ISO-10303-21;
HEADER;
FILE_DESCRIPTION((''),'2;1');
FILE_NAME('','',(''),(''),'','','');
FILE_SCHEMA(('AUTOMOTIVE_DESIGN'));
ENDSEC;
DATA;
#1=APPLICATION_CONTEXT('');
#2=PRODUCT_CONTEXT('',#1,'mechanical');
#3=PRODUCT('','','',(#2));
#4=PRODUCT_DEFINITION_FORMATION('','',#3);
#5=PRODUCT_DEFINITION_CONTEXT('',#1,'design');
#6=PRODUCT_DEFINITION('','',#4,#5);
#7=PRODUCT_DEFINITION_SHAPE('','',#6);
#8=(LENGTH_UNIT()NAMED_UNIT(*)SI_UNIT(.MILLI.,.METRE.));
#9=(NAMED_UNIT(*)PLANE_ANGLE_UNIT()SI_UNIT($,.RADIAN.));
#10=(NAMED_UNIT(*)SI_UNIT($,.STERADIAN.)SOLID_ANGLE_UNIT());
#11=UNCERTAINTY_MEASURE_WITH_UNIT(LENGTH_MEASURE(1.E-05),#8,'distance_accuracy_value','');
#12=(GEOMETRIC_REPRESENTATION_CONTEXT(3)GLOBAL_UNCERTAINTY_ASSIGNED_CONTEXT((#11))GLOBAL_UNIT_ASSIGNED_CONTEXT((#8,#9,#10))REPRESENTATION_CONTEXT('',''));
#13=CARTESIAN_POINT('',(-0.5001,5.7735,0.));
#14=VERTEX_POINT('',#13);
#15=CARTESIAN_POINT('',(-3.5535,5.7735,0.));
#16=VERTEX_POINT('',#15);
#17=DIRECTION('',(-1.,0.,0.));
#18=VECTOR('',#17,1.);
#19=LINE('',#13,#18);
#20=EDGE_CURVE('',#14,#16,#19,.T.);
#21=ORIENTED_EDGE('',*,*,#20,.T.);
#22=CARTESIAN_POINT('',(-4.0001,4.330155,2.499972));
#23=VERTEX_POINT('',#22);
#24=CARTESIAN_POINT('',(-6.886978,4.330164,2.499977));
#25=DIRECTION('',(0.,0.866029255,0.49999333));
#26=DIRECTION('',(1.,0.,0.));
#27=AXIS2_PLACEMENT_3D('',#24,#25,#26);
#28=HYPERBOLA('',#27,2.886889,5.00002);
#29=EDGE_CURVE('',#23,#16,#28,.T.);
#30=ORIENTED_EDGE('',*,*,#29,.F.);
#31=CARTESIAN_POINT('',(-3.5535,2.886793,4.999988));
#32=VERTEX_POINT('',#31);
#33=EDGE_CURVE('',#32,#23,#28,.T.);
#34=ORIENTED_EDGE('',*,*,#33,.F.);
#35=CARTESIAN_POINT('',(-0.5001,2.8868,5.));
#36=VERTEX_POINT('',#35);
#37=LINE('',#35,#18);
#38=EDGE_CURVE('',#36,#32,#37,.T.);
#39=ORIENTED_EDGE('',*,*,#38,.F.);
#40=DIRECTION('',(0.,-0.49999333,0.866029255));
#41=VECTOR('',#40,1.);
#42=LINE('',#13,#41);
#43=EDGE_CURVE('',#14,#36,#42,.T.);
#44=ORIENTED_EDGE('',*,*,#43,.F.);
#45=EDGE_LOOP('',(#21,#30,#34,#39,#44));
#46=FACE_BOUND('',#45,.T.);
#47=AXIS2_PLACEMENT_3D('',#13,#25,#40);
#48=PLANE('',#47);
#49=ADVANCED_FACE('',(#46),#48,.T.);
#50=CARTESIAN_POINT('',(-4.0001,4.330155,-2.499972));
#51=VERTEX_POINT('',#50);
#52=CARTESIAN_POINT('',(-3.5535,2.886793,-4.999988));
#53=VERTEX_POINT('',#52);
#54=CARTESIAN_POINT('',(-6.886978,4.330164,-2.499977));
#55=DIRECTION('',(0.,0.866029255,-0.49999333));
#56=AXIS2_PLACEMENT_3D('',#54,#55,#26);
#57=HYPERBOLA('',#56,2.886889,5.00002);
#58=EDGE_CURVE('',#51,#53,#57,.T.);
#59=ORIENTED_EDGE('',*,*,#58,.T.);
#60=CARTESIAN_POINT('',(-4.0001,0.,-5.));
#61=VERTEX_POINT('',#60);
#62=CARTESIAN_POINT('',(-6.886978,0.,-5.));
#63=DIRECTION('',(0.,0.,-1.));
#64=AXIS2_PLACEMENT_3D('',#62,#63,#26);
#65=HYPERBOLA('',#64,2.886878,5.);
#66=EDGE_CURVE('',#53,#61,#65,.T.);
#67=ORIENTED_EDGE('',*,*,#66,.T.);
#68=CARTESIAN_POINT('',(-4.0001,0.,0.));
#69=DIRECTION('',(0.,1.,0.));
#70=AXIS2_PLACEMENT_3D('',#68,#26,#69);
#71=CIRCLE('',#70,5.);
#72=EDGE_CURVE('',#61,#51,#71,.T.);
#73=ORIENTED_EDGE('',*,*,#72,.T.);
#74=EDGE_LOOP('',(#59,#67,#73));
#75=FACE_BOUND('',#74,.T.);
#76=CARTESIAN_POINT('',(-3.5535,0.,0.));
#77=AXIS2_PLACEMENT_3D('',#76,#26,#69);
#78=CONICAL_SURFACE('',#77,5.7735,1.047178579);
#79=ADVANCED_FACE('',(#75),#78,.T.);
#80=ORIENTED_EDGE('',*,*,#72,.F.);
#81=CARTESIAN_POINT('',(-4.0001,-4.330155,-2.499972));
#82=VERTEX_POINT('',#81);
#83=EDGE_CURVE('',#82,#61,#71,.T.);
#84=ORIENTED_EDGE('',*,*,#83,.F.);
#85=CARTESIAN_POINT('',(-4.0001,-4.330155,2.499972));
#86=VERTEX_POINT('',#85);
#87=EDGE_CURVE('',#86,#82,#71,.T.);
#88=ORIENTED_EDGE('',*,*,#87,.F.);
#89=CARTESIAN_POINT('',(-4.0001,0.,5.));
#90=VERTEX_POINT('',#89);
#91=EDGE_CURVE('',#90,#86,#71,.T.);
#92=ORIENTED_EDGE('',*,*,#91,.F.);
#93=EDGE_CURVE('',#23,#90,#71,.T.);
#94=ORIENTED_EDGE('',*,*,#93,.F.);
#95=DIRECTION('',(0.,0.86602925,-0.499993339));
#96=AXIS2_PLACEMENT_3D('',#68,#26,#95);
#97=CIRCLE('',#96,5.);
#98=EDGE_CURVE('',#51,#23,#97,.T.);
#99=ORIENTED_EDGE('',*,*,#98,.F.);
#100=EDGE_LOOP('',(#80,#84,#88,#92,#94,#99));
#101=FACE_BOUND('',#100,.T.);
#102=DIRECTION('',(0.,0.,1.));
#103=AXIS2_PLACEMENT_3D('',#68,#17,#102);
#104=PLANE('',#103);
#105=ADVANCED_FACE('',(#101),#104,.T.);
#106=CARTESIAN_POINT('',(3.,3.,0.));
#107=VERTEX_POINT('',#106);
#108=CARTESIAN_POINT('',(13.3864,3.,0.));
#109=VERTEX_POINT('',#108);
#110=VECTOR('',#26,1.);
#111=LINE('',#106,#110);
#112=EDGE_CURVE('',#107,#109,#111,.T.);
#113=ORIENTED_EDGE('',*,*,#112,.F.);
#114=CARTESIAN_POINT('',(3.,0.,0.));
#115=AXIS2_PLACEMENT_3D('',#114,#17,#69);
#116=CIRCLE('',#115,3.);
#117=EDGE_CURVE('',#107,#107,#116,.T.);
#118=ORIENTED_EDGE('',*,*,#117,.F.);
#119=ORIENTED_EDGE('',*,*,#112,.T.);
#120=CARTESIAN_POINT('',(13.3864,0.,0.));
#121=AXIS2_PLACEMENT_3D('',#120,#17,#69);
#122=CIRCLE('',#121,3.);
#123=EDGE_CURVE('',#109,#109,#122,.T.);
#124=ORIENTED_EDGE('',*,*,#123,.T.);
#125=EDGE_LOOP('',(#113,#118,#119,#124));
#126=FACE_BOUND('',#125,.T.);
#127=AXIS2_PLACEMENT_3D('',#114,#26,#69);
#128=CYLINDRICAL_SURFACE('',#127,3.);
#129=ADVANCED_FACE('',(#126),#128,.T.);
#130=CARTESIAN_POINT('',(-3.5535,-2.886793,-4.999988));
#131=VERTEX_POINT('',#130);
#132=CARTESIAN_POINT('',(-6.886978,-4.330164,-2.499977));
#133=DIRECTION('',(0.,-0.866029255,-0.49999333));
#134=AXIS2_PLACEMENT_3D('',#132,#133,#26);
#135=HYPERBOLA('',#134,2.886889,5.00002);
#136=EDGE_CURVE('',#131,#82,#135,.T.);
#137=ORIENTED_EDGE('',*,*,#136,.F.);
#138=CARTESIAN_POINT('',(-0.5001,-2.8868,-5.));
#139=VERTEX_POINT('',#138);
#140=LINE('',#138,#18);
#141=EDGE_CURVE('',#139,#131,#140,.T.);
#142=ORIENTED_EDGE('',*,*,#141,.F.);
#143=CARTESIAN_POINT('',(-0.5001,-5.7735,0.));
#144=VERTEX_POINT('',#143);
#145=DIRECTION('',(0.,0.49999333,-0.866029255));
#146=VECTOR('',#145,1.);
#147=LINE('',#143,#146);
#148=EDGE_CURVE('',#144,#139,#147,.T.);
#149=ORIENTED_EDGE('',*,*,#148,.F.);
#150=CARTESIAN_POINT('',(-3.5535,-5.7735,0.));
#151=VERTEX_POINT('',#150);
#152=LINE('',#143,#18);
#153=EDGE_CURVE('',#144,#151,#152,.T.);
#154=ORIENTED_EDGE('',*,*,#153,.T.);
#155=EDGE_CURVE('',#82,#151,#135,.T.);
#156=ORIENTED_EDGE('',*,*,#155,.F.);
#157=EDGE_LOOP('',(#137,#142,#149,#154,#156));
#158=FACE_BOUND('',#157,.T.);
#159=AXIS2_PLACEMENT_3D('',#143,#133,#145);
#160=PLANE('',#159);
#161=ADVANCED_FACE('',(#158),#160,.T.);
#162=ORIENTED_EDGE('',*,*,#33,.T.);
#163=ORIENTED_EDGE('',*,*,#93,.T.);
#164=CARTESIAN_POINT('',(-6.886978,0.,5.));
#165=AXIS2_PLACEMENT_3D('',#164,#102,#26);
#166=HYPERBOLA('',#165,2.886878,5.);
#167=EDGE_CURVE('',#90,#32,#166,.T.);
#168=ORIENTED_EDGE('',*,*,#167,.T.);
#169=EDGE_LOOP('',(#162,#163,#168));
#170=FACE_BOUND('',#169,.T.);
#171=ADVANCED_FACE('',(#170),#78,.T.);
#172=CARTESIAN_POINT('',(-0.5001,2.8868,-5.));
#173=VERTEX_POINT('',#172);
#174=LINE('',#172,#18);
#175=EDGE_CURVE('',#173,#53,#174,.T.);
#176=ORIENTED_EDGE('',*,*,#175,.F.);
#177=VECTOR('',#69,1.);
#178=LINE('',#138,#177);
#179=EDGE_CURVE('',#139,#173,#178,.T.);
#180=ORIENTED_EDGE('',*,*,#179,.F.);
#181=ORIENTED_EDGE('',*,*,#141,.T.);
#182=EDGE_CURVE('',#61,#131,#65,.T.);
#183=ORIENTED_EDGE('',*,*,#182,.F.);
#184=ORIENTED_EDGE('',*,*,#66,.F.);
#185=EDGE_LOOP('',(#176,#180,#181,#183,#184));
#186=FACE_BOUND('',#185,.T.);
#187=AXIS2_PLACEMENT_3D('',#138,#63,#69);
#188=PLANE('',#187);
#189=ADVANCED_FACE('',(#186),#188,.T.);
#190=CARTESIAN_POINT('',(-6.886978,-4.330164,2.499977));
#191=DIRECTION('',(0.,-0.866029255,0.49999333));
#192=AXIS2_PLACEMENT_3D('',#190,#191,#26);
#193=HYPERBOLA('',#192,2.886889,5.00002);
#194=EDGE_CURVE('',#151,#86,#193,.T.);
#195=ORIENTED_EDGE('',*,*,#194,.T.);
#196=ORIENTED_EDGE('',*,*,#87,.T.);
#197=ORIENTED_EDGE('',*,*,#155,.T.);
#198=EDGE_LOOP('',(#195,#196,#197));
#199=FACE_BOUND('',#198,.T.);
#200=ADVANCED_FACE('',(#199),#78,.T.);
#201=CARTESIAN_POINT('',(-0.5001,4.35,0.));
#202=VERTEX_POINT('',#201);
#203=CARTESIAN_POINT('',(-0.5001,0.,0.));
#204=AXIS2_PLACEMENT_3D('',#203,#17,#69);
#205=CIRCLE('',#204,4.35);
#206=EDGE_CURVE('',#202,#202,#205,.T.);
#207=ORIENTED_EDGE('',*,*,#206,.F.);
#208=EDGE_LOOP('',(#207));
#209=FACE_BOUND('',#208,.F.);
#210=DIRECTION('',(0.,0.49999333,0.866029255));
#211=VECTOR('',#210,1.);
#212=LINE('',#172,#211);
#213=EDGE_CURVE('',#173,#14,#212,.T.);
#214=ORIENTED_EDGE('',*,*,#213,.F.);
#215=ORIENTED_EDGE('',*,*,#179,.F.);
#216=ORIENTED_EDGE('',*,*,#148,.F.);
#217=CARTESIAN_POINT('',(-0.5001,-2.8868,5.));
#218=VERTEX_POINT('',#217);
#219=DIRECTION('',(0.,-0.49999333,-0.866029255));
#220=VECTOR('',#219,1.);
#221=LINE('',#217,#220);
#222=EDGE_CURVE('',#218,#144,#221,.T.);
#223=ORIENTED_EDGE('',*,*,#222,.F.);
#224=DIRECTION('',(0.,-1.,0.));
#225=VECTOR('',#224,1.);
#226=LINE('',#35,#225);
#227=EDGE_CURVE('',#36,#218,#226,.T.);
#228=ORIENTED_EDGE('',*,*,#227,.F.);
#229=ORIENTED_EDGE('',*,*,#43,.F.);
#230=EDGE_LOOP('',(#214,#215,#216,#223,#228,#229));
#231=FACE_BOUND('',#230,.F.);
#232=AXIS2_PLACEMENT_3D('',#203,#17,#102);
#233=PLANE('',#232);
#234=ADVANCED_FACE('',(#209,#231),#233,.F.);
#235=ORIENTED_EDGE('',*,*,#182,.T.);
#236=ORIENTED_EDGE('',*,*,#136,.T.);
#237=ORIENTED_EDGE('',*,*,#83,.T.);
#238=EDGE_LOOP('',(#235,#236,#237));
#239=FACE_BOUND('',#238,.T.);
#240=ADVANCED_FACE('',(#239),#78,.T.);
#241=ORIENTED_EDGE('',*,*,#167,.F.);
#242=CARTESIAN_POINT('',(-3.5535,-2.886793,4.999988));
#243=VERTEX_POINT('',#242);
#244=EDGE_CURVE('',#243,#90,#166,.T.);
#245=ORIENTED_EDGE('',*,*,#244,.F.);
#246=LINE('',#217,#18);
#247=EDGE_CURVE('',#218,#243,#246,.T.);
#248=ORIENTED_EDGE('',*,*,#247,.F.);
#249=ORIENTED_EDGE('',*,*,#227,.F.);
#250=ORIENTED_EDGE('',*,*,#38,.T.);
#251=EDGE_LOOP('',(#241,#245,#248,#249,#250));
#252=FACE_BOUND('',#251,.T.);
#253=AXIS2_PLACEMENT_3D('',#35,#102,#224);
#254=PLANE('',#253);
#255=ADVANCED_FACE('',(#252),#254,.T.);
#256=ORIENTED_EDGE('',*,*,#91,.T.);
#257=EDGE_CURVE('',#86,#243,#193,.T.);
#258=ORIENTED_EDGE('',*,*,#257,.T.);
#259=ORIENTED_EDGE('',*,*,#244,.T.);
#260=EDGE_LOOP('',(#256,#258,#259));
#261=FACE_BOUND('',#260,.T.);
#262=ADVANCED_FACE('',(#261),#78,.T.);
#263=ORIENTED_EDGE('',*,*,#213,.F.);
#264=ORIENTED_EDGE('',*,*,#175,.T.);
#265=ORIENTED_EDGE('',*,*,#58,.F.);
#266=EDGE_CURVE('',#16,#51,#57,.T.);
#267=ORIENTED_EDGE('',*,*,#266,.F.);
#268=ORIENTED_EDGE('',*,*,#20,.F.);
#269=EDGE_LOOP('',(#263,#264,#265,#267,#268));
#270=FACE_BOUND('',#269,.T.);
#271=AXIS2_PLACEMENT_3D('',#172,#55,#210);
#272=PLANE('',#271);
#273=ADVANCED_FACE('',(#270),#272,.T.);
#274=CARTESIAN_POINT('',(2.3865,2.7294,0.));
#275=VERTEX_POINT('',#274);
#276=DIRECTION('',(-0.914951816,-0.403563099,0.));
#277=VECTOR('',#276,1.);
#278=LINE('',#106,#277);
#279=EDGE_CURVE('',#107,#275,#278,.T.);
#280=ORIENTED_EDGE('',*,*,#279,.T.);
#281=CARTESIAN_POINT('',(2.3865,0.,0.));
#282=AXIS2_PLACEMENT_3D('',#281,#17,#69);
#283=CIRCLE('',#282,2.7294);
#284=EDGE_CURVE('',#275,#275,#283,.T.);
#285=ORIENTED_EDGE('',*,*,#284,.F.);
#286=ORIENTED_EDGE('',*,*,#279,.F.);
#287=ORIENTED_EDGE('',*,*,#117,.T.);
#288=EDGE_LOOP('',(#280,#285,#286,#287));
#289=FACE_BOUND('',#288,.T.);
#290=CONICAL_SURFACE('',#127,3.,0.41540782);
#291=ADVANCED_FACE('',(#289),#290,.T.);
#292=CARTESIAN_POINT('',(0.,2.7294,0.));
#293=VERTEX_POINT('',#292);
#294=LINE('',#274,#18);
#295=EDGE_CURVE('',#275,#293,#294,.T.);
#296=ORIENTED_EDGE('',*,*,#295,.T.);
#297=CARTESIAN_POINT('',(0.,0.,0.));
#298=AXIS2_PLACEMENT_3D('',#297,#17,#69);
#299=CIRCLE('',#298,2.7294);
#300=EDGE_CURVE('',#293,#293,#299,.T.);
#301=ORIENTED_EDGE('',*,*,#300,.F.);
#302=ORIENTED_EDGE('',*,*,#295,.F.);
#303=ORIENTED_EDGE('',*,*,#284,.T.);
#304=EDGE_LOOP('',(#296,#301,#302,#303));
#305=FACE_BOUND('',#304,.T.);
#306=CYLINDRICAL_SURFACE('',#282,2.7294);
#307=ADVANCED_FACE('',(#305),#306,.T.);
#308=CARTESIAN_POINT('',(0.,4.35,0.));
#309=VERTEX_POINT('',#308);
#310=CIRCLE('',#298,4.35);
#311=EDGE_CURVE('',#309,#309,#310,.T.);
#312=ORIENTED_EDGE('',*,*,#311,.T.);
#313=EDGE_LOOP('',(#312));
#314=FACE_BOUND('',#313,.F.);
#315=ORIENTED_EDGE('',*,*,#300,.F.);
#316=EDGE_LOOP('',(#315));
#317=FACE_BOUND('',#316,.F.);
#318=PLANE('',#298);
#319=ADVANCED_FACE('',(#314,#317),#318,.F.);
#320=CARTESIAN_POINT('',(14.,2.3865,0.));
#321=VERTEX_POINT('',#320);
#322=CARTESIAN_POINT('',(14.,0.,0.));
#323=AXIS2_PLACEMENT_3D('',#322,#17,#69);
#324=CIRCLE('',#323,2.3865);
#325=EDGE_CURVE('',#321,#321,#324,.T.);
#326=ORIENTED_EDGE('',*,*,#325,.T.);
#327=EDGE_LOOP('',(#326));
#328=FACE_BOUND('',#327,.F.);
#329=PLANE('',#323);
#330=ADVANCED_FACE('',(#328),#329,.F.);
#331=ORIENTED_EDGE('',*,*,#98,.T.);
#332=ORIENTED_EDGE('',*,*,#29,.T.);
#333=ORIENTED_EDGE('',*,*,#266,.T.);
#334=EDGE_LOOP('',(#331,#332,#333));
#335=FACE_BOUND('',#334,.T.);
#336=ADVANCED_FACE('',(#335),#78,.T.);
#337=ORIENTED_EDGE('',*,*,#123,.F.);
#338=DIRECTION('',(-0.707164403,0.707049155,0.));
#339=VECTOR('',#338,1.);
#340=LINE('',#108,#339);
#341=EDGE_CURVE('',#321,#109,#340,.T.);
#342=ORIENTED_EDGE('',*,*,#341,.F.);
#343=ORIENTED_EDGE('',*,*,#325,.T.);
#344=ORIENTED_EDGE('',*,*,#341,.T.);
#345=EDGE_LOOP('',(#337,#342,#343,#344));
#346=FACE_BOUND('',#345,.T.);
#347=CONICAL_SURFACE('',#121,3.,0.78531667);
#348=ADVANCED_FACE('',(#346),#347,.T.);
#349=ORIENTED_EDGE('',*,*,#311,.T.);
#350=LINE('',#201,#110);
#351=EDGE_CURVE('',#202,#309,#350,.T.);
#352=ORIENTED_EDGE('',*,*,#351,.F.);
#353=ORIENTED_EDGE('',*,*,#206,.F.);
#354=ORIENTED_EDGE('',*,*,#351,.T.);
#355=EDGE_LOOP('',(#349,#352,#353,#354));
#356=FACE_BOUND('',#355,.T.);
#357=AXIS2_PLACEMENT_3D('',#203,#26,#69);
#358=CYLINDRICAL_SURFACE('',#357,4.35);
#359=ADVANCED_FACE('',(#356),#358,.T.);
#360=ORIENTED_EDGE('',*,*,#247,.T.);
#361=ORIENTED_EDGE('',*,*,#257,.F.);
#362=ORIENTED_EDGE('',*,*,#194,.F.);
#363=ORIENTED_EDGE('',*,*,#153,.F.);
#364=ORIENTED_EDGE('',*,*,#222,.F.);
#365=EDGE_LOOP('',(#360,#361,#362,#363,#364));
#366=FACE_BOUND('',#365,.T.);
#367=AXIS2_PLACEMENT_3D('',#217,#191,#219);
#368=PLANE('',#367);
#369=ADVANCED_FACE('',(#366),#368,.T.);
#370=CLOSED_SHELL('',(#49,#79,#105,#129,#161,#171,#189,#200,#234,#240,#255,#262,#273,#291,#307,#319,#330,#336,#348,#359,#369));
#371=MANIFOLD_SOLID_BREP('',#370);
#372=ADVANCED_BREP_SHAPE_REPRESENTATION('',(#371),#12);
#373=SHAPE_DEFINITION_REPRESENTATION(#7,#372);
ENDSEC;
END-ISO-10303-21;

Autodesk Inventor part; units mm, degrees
ref_plane "YZ Plane" through (0, 0, 0) normal (1, 0, 0) x (0, 1, 0)
ref_plane "XZ Plane" through (0, 0, 0) normal (0, 1, 0) x (-1, 0, 0)
sketch "Sketch1" plane through (0, 0, 0) normal (0, 0, 1) x (1, 0, 0)
  line L0 (0, 4.35) -> (0, 2.7294)
  line L1 (3, 3) -> (14, 3)
  line L2 (14, 3) -> (14, 0)
  line L3 (14, 0) -> (-0.5001, 0)
  line L4 (-3.4001, 0) -> (16.9, 0) projected
  line L5 (-0.5001, 0) -> (-0.5001, 4.35)
  line L6 (-0.5001, 4.35) -> (0, 4.35)
  line L7 (3, 3) -> (2.3865, 2.7294)
  line L8 (2.3865, 2.7294) -> (0, 2.7294)
  line L9 (0, -0.87) -> (0, 5.22) projected
  dimension "d0" = 14
  dimension "d1" = 11
  dimension "d2" = 6
  dimension "d9" = 0.5001
  dimension "d10" = 8.7
  dimension "d13" = 0.6136
  dimension "d14" = 5.4587
revolve "Body" add sketch "Sketch1" angle 360 about axis through (14, 0, 0) along (-1, 0, 0)
sketch "Sketch2" plane through (-0.5001, 0, 0) normal (-1, 0, 0) x (0, 0, 1)
  line L0 (0, 5.7735) -> (5, 2.8868)
  line L1 (5, 2.8868) -> (5, -2.8868)
  line L2 (5, -2.8868) -> (0, -5.7735)
  line L3 (0, -5.7735) -> (-5, -2.8868)
  line L4 (-5, -2.8868) -> (-5, 2.8868)
  line L5 (-5, 2.8868) -> (0, 5.7735)
  point P0 (0, 0)
  point P1 (0, 0)
  dimension "d11" = 10
extrude "Head" add sketch "Sketch2" along normal blind 3.5
sketch "Sketch4" plane through (0, 0, 0) normal (0, 0, 1) x (1, 0, 0)
  line L0 (-4.0001, 5) -> (-4.0001, 5.7735)
  line L1 (-4.0001, 5.7735) -> (-3.5535, 5.7735)
  line L2 (-3.5535, 5.7735) -> (-4.0001, 5)
  line L3 (-4.7001, 0) -> (0.1999, 0) projected
  line L4 (-0.5001, 5.7735) -> (-4.0001, 5.7735) projected
  line L5 (-4.0001, 2.8868) -> (-4.0001, 5.7735) projected
  dimension "d5" = 30
  dimension "d19" = 10
revolve "Chamfer1" cut sketch "Sketch4" angle 360 about axis through (-10, 0, 0) along (1, 0, 0)
thread "Thread" size "M6x1" class "6g" standard "ISO Metric profile" length 11
chamfer "Chamfer2" distance 0.6135 distance2 0.6136 1 edges at (14, -3, 0) measured on face at (14, 1.0659, -1.0214)
ref_plane "Work Plane1" through (1.525, 0, 0) normal (0, 0, 1) x (1, 0, 0)
equation "\"d0\" = NLG"
equation "\"d1\" = GEL"
equation "\"d2\" = GD"
equation "\"d10\" = SD2"
equation "\"d14\" = BDM"
equation "\"d11\" = SW"
equation "\"d3\" = KOH - SD"
equation "\"d5\" = ANG1"
equation "\"d19\" = SW0"
equation "\"d15\" = GEL"
equation "\"d6\" = -0.5 * SPD + 0.5 * GD"
equation "\"NLG\" = 14"
equation "\"GD\" = NND"
equation "\"BDM\" = 5.45873"
equation "\"KOH\" = 4"
equation "\"GEL\" = 11"
equation "\"SW\" = 10"
equation "\"SW0\" = 10"
equation "\"SPD\" = NND - 1.2269 * PTC"
equation "\"SD2\" = 8.7"
equation "\"SD\" = 0.5"
equation "\"ANG1\" = 30deg"
equation "\"GAL\" = 0.61345 * PTC"
equation "\"GUL\" = 0.61345 * PTC"
equation "\"RR\" = 0.25"
equation "\"GD1\" = THREADDIA - 1.2269 * PTC"
equation "\"THREADDIA\" = 6"
equation "\"TOA\" = 30deg"
equation "\"PTC\" = 1"
equation "\"NND\" = 6"
equation "\"E0\" = 1.155 * SW"
properties part number "DIN 933 - M6  x 14" material "Steel, Mild"
